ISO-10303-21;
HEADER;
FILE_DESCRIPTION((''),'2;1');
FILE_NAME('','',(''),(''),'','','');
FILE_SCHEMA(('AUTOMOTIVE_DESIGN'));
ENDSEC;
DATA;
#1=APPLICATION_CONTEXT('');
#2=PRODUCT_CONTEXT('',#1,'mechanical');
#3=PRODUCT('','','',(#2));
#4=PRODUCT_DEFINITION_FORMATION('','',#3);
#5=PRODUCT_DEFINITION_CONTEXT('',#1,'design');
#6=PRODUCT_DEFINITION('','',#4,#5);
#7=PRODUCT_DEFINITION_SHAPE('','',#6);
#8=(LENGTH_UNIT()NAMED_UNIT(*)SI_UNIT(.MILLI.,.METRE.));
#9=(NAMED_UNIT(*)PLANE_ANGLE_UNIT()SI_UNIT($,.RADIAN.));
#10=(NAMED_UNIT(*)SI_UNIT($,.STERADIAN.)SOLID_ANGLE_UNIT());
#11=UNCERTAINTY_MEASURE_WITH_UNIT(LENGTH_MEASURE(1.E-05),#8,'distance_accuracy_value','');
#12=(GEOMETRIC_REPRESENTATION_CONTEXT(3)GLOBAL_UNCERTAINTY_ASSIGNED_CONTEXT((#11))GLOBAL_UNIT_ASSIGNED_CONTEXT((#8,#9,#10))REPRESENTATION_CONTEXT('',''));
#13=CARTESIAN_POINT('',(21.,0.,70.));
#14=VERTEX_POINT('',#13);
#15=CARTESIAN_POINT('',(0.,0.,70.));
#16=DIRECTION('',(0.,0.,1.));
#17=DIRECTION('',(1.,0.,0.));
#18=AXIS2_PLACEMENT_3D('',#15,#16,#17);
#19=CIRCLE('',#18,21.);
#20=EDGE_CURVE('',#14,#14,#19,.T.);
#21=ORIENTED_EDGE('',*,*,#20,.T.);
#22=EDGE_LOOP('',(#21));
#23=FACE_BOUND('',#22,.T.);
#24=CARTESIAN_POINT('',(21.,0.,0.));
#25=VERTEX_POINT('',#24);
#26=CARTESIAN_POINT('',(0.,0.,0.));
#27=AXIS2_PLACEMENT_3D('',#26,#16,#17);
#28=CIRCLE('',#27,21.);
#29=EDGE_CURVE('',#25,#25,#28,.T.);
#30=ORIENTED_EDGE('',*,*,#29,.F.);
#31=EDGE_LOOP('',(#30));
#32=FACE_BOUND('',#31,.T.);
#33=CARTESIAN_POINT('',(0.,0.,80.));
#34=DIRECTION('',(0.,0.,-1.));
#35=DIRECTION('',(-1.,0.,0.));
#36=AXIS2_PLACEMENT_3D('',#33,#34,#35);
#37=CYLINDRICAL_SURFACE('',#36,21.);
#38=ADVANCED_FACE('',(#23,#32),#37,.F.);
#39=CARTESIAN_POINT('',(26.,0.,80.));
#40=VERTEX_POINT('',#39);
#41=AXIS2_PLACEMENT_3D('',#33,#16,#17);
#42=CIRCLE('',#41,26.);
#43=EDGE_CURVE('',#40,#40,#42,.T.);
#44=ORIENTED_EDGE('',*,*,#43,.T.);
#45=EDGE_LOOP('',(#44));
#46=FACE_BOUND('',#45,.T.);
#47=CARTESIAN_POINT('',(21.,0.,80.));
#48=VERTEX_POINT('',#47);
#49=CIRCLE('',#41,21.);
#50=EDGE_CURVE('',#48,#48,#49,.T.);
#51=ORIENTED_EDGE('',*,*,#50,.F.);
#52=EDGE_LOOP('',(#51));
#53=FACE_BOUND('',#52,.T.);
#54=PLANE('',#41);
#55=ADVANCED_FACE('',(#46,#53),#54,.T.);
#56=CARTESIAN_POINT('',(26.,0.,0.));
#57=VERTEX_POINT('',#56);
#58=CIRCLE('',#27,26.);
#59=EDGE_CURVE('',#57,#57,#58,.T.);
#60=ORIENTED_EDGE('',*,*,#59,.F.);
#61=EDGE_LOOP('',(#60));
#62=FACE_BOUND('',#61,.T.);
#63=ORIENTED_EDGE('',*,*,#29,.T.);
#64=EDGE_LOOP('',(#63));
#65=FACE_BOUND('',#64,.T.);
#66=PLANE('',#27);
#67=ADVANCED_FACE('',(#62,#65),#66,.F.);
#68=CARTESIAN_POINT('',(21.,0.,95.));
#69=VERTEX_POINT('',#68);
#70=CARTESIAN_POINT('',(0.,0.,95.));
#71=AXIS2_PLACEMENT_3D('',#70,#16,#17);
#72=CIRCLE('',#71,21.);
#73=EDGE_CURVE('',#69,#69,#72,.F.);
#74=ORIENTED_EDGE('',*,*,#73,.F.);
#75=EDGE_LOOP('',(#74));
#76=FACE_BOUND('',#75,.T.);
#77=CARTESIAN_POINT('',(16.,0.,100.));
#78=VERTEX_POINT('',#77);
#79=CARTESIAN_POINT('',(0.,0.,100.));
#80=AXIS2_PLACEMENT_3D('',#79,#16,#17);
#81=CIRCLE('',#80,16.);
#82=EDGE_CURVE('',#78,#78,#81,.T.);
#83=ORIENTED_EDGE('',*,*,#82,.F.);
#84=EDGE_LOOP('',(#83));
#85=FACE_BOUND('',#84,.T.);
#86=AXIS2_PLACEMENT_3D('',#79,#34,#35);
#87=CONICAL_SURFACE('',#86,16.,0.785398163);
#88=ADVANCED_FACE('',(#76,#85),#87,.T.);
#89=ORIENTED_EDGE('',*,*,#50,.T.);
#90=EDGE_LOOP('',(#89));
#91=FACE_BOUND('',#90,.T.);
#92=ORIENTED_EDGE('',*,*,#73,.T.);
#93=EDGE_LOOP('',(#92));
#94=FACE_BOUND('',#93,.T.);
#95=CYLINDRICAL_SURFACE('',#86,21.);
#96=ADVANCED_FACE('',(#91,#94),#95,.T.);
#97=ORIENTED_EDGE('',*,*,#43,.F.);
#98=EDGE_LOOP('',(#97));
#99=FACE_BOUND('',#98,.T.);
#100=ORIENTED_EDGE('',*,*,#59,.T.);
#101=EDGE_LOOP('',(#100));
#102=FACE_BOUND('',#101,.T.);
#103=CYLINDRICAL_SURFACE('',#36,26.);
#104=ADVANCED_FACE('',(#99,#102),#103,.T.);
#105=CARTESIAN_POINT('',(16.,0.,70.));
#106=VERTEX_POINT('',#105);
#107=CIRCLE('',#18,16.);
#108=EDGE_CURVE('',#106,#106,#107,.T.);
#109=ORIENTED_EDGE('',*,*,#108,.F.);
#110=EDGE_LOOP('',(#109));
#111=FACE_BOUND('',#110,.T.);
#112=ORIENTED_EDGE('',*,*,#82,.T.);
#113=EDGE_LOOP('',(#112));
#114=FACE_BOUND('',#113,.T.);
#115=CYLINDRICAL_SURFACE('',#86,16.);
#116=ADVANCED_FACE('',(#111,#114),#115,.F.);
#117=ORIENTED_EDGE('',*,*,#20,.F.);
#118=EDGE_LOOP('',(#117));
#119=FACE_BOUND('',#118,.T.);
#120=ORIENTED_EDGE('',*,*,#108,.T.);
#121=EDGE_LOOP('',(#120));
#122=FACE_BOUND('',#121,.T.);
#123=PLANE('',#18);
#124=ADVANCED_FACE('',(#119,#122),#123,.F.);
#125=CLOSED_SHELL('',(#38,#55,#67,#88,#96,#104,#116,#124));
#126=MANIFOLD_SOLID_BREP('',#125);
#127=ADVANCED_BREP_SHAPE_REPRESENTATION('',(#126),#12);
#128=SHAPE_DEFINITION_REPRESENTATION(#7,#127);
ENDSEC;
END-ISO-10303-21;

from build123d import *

# Parameters (mm, degrees)
SKETCH15_R          = 26
SKETCH15_R_2        = 21
BOSS_EXTRUDE2_DEPTH = 80
BOSS_EXTRUDE5_START = -10
SKETCH18_R          = 21
SKETCH18_R_2        = 16
BOSS_EXTRUDE5_DEPTH = 30
CHAMFER1_SIZE       = 5


with BuildPart() as part:
    # Sketch15 → Boss-Extrude2 (new body)
    with BuildSketch(Plane.XY):
        Circle(SKETCH15_R)
        Circle(SKETCH15_R_2, mode=Mode.SUBTRACT)
    extrude(amount=BOSS_EXTRUDE2_DEPTH)

    # Sketch18 → Boss-Extrude5 (add)
    with BuildSketch(Plane.XY.offset(80).offset(BOSS_EXTRUDE5_START)):
        Circle(SKETCH18_R)
        Circle(SKETCH18_R_2, mode=Mode.SUBTRACT)
    extrude(amount=BOSS_EXTRUDE5_DEPTH)

    # Chamfer1
    chamfer1_edges = [part.edges().sort_by_distance(p)[0] for p in [
        (-21, 0, 100),
    ]]
    chamfer(chamfer1_edges, length=CHAMFER1_SIZE - 0.0001)  # a hair under: the kernel refuses the full size


solid = part.part
